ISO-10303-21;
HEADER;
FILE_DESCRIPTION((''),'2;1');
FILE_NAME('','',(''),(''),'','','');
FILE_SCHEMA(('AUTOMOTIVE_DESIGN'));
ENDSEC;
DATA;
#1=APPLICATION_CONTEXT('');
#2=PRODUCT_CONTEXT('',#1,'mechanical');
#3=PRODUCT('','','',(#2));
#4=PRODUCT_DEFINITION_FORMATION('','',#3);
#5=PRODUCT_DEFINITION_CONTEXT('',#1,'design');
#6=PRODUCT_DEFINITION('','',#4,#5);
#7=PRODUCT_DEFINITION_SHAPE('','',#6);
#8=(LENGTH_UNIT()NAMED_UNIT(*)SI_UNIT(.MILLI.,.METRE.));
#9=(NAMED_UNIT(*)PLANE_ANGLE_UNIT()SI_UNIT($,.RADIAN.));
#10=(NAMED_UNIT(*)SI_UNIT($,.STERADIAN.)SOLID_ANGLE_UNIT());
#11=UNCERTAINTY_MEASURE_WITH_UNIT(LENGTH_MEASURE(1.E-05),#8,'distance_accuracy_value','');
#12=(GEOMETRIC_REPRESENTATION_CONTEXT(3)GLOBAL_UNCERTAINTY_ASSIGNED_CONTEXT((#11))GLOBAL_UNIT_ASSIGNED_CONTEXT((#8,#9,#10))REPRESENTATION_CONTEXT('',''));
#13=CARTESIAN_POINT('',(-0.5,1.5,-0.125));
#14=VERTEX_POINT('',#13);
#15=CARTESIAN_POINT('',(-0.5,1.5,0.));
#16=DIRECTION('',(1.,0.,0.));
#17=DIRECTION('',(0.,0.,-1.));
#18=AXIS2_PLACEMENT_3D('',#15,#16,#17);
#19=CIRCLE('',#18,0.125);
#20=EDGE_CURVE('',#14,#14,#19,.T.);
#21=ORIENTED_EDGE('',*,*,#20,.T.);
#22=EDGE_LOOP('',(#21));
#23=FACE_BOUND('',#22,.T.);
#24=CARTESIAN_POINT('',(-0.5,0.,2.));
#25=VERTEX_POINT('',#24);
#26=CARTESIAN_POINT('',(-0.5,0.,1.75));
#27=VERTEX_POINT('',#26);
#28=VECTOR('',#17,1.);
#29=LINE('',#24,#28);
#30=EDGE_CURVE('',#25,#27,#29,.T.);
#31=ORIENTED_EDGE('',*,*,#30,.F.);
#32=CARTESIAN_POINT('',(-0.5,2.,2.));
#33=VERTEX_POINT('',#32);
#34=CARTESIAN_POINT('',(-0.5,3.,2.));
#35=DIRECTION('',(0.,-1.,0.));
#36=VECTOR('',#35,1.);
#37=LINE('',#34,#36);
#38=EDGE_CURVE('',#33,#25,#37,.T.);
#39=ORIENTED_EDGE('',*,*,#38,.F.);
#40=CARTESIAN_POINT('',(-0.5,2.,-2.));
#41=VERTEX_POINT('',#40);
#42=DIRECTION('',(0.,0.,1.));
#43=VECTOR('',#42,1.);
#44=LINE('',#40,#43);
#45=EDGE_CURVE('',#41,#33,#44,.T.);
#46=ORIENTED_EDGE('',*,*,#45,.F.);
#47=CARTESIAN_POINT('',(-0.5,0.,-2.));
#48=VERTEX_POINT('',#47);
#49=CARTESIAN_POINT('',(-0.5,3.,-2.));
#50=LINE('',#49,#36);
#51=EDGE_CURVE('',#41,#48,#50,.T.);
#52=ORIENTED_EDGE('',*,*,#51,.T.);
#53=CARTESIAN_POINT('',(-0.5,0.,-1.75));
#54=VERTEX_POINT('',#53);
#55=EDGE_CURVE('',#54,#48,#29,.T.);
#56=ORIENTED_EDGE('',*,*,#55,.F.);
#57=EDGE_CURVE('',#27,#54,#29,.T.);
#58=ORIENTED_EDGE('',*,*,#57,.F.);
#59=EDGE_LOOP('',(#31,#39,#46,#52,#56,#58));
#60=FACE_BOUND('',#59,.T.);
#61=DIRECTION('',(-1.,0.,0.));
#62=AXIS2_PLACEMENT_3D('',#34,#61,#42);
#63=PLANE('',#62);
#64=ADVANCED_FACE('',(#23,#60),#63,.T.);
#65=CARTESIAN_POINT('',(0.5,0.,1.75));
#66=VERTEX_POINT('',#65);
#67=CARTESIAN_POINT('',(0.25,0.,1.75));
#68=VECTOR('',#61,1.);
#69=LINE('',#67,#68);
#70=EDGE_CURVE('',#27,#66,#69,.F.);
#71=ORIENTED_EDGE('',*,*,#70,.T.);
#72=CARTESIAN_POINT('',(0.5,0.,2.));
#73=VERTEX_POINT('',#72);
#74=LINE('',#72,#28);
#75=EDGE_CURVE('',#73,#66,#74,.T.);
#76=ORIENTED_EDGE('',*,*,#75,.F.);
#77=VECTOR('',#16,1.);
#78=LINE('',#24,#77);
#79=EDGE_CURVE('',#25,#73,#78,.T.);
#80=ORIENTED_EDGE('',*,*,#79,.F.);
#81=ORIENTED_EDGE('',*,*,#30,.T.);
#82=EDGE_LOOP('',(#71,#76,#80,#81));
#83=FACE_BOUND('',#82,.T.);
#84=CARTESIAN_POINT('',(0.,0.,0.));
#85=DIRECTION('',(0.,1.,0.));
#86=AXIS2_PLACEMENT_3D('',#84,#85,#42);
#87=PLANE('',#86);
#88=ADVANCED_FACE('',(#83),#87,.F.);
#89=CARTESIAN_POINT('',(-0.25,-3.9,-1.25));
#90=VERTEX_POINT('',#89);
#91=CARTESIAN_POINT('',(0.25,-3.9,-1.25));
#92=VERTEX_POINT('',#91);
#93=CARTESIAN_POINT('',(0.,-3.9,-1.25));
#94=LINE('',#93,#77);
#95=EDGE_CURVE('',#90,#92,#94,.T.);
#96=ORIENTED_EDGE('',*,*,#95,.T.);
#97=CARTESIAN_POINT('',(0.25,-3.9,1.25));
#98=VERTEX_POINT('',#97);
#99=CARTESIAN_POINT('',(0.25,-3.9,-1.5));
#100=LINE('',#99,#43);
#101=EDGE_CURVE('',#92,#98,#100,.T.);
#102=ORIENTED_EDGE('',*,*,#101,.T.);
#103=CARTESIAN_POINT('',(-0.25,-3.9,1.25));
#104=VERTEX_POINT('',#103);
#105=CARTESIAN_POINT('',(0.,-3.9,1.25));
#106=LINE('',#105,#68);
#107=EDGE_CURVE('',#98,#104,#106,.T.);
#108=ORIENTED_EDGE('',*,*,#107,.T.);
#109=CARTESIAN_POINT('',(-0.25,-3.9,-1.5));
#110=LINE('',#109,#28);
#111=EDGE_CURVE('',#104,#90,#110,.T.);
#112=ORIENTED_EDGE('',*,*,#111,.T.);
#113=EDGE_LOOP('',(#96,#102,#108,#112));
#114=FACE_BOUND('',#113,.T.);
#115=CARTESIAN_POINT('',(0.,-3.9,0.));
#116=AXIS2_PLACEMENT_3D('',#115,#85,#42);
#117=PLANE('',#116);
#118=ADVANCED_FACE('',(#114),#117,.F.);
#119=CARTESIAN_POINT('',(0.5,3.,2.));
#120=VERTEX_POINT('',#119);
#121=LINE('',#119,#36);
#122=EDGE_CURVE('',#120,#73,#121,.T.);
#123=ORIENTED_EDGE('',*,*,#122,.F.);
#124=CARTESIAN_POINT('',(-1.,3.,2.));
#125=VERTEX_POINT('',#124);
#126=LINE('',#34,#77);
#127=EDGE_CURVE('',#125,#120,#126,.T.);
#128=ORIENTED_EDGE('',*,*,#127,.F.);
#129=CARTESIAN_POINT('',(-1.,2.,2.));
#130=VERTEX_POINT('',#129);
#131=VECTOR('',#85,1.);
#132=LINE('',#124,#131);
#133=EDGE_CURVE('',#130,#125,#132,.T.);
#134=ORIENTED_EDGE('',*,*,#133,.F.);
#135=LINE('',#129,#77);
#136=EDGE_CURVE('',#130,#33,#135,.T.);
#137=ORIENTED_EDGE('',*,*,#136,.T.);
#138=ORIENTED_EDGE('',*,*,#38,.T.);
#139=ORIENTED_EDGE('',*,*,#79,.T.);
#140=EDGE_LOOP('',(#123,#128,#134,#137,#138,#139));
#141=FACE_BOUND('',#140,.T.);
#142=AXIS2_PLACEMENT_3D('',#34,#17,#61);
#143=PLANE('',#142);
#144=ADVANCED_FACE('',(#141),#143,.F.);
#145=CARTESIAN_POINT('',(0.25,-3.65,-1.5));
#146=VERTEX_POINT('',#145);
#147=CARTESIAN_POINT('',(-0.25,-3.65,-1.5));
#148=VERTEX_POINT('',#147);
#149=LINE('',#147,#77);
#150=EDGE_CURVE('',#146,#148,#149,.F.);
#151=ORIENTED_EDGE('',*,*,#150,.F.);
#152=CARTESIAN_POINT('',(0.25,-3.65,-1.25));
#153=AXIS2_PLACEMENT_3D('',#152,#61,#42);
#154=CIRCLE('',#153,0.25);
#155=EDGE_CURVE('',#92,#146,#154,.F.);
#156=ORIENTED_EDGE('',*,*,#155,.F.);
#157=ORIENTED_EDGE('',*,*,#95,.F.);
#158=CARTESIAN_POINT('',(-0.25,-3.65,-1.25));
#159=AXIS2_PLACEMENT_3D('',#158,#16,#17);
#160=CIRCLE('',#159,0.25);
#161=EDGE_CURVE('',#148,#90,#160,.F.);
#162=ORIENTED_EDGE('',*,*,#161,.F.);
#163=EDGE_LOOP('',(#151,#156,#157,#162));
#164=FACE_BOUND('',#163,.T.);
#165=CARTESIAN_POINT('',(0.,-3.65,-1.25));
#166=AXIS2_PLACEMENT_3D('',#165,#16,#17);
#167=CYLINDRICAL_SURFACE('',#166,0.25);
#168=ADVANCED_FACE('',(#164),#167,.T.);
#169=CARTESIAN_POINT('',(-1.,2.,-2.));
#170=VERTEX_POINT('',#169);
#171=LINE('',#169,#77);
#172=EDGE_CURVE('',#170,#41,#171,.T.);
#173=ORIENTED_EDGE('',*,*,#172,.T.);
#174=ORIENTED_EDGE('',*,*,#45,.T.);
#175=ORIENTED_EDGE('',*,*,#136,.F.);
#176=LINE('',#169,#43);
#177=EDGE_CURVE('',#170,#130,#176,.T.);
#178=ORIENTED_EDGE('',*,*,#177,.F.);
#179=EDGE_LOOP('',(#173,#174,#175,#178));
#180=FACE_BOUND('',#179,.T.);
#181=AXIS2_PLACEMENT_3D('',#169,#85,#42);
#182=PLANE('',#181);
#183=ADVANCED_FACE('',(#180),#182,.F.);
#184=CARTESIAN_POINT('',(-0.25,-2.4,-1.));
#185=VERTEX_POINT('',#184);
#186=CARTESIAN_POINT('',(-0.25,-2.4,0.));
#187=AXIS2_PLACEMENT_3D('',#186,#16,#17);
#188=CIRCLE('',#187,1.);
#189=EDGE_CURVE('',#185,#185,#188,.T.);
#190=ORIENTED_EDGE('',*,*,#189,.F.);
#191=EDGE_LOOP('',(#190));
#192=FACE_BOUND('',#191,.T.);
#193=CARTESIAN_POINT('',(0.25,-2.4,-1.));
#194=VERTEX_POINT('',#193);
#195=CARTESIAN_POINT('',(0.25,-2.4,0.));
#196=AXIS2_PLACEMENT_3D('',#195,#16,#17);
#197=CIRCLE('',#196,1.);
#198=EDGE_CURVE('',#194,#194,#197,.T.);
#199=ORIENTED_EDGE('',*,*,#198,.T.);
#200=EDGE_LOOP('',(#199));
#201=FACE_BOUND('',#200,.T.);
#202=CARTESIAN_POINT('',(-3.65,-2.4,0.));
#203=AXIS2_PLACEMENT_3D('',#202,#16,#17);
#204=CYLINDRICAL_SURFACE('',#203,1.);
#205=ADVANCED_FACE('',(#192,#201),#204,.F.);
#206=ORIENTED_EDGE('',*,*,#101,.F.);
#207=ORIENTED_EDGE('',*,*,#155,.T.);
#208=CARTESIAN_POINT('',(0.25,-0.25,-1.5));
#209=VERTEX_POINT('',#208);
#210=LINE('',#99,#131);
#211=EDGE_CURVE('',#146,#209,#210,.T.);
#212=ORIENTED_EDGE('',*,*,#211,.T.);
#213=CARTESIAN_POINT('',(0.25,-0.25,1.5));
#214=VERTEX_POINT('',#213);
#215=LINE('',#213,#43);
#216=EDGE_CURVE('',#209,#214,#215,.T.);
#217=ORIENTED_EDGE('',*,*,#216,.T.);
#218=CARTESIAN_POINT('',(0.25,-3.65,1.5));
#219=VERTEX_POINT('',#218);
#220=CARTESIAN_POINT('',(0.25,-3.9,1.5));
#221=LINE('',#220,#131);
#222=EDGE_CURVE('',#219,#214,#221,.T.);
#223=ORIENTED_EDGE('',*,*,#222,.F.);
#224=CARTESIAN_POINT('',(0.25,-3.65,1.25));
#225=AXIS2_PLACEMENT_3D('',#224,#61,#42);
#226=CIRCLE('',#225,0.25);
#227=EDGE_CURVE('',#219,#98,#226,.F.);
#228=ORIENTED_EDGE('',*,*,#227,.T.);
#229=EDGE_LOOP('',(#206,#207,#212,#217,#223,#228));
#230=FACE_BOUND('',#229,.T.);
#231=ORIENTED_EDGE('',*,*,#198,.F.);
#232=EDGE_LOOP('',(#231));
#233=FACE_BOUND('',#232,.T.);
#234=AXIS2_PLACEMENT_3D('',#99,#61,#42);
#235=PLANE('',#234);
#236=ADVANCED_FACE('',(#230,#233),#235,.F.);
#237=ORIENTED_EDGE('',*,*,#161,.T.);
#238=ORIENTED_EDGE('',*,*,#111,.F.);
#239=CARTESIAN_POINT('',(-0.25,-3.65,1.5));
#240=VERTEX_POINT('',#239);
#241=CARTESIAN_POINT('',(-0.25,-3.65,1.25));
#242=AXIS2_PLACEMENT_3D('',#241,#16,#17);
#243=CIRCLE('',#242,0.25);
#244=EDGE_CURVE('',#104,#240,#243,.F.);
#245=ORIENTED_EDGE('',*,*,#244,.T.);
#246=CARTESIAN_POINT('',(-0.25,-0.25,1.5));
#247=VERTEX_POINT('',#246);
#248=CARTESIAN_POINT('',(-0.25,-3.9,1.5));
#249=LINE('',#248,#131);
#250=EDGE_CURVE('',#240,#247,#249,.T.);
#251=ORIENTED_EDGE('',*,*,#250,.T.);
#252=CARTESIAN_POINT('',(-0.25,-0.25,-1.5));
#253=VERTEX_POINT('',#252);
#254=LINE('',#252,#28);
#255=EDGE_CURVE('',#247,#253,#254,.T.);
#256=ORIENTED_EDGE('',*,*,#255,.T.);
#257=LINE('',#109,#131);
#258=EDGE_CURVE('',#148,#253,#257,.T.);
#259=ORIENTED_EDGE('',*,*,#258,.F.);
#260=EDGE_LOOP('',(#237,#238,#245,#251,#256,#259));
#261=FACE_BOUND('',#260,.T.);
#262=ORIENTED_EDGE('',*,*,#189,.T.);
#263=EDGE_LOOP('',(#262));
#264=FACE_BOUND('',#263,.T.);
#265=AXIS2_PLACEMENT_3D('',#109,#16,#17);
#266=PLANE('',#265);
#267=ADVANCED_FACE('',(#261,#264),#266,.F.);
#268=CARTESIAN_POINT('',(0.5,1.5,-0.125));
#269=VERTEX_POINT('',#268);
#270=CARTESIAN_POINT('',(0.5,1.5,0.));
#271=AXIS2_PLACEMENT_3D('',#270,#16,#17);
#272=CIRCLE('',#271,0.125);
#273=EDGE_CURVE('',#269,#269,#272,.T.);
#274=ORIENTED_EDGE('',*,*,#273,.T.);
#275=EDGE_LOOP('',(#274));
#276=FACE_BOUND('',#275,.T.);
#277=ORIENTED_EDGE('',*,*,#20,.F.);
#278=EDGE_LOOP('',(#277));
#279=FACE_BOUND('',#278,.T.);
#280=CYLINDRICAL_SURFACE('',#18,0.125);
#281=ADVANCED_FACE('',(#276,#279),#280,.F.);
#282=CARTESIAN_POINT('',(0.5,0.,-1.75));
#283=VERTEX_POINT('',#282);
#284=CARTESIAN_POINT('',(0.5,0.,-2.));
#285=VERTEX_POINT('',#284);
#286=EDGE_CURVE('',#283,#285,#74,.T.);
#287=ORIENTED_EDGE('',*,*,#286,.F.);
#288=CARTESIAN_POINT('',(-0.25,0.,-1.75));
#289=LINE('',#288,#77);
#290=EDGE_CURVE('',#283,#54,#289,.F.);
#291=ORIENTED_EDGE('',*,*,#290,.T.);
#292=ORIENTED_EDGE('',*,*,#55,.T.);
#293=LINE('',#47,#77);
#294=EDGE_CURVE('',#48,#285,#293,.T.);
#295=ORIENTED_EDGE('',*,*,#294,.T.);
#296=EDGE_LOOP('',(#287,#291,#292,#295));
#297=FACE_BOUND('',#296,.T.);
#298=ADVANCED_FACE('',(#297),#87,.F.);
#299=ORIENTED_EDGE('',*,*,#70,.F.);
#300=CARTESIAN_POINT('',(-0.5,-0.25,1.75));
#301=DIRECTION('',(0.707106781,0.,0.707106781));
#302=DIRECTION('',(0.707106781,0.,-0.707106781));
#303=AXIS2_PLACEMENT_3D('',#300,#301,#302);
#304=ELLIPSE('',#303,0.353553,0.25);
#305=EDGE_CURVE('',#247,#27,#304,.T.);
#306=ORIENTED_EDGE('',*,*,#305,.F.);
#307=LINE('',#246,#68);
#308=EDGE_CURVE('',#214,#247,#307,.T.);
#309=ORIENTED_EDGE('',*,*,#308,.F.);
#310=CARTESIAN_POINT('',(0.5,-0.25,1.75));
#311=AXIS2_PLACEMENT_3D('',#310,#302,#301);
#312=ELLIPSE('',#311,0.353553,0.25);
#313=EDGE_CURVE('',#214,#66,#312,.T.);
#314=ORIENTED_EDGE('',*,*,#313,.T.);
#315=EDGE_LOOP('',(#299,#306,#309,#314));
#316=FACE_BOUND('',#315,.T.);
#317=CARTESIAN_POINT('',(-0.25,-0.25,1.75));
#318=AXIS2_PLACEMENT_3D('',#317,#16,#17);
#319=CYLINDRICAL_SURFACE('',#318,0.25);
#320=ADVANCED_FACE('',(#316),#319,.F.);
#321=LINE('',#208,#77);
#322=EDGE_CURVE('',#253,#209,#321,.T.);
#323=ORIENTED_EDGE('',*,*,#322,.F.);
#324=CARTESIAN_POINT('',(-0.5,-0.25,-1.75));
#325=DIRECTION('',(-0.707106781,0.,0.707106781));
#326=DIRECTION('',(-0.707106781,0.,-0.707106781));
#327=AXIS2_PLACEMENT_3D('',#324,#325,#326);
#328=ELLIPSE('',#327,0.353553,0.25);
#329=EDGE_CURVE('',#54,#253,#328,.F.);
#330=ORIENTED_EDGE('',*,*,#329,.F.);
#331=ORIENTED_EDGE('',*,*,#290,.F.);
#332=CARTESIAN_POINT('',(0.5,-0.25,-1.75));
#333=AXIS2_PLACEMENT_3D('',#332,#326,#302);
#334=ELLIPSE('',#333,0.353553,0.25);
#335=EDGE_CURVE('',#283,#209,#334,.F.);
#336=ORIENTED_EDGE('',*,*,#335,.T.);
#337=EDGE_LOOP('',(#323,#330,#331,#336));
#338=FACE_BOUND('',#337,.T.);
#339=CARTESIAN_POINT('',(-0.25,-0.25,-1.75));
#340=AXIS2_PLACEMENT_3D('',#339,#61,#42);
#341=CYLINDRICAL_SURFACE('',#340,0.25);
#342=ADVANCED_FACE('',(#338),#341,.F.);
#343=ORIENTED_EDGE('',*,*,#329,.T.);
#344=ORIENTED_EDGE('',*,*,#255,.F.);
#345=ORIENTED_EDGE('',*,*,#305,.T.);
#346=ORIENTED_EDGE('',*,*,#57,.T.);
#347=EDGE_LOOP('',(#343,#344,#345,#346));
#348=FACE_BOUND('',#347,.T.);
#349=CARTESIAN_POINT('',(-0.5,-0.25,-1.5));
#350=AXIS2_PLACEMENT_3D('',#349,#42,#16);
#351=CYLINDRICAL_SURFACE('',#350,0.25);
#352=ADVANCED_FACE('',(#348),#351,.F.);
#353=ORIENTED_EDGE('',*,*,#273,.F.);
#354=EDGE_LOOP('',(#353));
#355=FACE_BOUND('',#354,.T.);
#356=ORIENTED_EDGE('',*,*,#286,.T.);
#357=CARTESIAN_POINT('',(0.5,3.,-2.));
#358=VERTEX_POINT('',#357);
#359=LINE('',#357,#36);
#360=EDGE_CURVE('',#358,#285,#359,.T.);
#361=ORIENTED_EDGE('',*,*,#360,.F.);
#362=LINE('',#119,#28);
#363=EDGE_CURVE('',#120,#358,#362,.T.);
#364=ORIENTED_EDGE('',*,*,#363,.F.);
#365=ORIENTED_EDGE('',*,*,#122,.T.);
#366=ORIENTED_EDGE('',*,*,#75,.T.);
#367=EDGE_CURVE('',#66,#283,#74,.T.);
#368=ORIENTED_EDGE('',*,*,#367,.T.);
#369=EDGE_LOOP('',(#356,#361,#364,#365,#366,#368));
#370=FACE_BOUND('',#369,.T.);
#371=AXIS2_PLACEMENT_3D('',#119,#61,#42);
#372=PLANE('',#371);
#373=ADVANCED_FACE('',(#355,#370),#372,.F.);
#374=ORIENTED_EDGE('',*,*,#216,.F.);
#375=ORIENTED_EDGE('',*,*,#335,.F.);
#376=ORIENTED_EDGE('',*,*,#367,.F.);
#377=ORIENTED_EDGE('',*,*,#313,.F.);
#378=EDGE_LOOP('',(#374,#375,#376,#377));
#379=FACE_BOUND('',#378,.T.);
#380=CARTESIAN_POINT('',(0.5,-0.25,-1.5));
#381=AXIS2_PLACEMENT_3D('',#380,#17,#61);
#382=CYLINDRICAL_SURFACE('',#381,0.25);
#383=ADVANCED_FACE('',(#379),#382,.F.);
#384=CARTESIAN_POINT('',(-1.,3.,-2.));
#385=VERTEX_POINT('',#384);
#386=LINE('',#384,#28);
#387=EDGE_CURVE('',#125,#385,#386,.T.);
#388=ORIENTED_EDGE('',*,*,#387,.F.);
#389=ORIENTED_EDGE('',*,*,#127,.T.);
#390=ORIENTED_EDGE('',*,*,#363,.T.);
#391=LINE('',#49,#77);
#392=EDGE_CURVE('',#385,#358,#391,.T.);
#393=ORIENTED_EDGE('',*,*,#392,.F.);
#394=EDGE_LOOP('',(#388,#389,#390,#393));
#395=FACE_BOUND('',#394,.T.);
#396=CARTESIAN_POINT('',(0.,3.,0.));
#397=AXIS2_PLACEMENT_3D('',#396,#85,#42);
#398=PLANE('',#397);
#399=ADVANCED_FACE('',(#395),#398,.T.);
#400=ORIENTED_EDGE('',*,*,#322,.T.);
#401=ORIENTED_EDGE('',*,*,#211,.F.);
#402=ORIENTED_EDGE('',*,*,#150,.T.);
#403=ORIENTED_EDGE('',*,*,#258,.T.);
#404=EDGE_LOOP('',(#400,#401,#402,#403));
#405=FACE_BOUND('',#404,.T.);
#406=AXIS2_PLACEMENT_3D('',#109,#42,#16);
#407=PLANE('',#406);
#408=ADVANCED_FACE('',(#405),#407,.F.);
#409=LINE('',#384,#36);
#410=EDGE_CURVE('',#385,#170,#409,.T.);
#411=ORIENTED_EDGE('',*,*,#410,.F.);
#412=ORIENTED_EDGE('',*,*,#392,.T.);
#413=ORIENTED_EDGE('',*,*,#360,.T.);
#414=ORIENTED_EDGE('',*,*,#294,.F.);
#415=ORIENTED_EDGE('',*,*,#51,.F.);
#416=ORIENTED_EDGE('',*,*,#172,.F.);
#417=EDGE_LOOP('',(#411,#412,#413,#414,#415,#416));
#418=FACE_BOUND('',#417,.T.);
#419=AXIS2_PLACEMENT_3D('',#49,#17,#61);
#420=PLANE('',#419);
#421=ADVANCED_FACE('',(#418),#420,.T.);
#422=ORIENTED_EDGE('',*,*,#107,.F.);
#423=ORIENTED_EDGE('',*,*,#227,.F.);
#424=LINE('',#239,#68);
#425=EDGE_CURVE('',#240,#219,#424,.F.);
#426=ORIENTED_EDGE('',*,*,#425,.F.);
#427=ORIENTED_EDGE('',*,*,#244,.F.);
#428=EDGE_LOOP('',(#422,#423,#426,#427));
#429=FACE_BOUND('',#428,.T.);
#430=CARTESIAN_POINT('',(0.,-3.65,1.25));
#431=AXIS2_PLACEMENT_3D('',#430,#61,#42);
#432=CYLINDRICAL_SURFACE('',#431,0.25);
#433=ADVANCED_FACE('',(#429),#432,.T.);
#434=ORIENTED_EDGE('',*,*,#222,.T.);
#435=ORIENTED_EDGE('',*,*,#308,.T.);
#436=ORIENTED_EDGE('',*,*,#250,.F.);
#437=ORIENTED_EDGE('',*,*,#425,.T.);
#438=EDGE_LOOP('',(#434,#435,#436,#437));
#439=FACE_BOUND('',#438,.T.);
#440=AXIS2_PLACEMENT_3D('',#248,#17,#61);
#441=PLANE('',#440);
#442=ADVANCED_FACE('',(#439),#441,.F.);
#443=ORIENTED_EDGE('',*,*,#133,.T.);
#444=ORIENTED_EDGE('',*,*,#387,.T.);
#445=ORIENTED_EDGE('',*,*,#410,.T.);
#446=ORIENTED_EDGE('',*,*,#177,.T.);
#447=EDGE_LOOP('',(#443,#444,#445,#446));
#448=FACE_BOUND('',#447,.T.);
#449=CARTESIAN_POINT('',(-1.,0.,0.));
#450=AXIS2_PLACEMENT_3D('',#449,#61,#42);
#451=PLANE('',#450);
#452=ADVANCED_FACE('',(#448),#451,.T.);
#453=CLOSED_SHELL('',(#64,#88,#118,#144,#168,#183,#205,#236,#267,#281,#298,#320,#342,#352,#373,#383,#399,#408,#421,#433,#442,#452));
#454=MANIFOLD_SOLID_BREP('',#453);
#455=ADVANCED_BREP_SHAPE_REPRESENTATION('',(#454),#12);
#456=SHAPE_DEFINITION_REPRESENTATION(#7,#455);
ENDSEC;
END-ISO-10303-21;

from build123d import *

# Parameters (mm, degrees)
SZKIC1_W                    = 1
SZKIC1_H                    = 4
DODANIE_WYCI_GNI_CIE1_DEPTH = 3
SZKIC4_W                    = 0.5
SZKIC4_H                    = 3
DODANIE_WYCI_GNI_CIE3_DEPTH = 3.9
SZKIC5_R                    = 1
WYTNIJ_WYCI_GNI_CIE2_DEPTH  = 3.9
ZAOKR_GLENIE1_R             = 0.25
SZKIC8_W                    = 4
SZKIC8_H                    = 1
DODANIE_WYCI_GNI_CIE4_DEPTH = 0.5
SZKIC9_R                    = 0.125
WYTNIJ_WYCI_GNI_CIE3_DEPTH  = 1


with BuildPart() as part:
    # Szkic1 → Dodanie-wyciągnięcie1 (new body)
    with BuildSketch(Plane(origin=(0, 0, 0), x_dir=(1, 0, 0), z_dir=(0, 1, 0))):
        Rectangle(SZKIC1_W, SZKIC1_H)
    extrude(amount=DODANIE_WYCI_GNI_CIE1_DEPTH)

    # Szkic4 → Dodanie-wyciągnięcie3 (add)
    with BuildSketch(Plane.XZ):
        Rectangle(SZKIC4_W, SZKIC4_H)
    extrude(amount=DODANIE_WYCI_GNI_CIE3_DEPTH)

    # Szkic5 → Wytnij-wyciągnięcie2 (cut)
    with BuildSketch(Plane(origin=(0.25, 0, 0), x_dir=(0, 0, -1), z_dir=(1, 0, 0))):
        with Locations((0, -2.4)):
            Circle(SZKIC5_R)
    extrude(amount=-WYTNIJ_WYCI_GNI_CIE2_DEPTH, mode=Mode.SUBTRACT)

    # Zaokrąglenie1
    zaokr_glenie1_edges = [part.edges().sort_by_distance(p)[0] for p in [
        (0.25, 0, 0),
        (0, 0, 1.5),
        (-0.25, 0, 0),
        (0, 0, -1.5),
        (0, -3.9, 1.5),
        (0, -3.9, -1.5),
    ]]
    fillet(zaokr_glenie1_edges, radius=ZAOKR_GLENIE1_R - 0.0001)  # a hair under: the kernel refuses the full size

    # Szkic8 → Dodanie-wyciągnięcie4 (add)
    with BuildSketch(Plane.ZY.offset(0.5)):
        with Locations((0, 2.5)):
            Rectangle(SZKIC8_W, SZKIC8_H)
    extrude(amount=DODANIE_WYCI_GNI_CIE4_DEPTH)

    # Szkic9 → Wytnij-wyciągnięcie3 (cut)
    with BuildSketch(Plane(origin=(0.5, 0, 0), x_dir=(0, 0, -1), z_dir=(1, 0, 0))):
        with Locations((0, 1.5)):
            Circle(SZKIC9_R)
    extrude(amount=-WYTNIJ_WYCI_GNI_CIE3_DEPTH, mode=Mode.SUBTRACT)


solid = part.part
